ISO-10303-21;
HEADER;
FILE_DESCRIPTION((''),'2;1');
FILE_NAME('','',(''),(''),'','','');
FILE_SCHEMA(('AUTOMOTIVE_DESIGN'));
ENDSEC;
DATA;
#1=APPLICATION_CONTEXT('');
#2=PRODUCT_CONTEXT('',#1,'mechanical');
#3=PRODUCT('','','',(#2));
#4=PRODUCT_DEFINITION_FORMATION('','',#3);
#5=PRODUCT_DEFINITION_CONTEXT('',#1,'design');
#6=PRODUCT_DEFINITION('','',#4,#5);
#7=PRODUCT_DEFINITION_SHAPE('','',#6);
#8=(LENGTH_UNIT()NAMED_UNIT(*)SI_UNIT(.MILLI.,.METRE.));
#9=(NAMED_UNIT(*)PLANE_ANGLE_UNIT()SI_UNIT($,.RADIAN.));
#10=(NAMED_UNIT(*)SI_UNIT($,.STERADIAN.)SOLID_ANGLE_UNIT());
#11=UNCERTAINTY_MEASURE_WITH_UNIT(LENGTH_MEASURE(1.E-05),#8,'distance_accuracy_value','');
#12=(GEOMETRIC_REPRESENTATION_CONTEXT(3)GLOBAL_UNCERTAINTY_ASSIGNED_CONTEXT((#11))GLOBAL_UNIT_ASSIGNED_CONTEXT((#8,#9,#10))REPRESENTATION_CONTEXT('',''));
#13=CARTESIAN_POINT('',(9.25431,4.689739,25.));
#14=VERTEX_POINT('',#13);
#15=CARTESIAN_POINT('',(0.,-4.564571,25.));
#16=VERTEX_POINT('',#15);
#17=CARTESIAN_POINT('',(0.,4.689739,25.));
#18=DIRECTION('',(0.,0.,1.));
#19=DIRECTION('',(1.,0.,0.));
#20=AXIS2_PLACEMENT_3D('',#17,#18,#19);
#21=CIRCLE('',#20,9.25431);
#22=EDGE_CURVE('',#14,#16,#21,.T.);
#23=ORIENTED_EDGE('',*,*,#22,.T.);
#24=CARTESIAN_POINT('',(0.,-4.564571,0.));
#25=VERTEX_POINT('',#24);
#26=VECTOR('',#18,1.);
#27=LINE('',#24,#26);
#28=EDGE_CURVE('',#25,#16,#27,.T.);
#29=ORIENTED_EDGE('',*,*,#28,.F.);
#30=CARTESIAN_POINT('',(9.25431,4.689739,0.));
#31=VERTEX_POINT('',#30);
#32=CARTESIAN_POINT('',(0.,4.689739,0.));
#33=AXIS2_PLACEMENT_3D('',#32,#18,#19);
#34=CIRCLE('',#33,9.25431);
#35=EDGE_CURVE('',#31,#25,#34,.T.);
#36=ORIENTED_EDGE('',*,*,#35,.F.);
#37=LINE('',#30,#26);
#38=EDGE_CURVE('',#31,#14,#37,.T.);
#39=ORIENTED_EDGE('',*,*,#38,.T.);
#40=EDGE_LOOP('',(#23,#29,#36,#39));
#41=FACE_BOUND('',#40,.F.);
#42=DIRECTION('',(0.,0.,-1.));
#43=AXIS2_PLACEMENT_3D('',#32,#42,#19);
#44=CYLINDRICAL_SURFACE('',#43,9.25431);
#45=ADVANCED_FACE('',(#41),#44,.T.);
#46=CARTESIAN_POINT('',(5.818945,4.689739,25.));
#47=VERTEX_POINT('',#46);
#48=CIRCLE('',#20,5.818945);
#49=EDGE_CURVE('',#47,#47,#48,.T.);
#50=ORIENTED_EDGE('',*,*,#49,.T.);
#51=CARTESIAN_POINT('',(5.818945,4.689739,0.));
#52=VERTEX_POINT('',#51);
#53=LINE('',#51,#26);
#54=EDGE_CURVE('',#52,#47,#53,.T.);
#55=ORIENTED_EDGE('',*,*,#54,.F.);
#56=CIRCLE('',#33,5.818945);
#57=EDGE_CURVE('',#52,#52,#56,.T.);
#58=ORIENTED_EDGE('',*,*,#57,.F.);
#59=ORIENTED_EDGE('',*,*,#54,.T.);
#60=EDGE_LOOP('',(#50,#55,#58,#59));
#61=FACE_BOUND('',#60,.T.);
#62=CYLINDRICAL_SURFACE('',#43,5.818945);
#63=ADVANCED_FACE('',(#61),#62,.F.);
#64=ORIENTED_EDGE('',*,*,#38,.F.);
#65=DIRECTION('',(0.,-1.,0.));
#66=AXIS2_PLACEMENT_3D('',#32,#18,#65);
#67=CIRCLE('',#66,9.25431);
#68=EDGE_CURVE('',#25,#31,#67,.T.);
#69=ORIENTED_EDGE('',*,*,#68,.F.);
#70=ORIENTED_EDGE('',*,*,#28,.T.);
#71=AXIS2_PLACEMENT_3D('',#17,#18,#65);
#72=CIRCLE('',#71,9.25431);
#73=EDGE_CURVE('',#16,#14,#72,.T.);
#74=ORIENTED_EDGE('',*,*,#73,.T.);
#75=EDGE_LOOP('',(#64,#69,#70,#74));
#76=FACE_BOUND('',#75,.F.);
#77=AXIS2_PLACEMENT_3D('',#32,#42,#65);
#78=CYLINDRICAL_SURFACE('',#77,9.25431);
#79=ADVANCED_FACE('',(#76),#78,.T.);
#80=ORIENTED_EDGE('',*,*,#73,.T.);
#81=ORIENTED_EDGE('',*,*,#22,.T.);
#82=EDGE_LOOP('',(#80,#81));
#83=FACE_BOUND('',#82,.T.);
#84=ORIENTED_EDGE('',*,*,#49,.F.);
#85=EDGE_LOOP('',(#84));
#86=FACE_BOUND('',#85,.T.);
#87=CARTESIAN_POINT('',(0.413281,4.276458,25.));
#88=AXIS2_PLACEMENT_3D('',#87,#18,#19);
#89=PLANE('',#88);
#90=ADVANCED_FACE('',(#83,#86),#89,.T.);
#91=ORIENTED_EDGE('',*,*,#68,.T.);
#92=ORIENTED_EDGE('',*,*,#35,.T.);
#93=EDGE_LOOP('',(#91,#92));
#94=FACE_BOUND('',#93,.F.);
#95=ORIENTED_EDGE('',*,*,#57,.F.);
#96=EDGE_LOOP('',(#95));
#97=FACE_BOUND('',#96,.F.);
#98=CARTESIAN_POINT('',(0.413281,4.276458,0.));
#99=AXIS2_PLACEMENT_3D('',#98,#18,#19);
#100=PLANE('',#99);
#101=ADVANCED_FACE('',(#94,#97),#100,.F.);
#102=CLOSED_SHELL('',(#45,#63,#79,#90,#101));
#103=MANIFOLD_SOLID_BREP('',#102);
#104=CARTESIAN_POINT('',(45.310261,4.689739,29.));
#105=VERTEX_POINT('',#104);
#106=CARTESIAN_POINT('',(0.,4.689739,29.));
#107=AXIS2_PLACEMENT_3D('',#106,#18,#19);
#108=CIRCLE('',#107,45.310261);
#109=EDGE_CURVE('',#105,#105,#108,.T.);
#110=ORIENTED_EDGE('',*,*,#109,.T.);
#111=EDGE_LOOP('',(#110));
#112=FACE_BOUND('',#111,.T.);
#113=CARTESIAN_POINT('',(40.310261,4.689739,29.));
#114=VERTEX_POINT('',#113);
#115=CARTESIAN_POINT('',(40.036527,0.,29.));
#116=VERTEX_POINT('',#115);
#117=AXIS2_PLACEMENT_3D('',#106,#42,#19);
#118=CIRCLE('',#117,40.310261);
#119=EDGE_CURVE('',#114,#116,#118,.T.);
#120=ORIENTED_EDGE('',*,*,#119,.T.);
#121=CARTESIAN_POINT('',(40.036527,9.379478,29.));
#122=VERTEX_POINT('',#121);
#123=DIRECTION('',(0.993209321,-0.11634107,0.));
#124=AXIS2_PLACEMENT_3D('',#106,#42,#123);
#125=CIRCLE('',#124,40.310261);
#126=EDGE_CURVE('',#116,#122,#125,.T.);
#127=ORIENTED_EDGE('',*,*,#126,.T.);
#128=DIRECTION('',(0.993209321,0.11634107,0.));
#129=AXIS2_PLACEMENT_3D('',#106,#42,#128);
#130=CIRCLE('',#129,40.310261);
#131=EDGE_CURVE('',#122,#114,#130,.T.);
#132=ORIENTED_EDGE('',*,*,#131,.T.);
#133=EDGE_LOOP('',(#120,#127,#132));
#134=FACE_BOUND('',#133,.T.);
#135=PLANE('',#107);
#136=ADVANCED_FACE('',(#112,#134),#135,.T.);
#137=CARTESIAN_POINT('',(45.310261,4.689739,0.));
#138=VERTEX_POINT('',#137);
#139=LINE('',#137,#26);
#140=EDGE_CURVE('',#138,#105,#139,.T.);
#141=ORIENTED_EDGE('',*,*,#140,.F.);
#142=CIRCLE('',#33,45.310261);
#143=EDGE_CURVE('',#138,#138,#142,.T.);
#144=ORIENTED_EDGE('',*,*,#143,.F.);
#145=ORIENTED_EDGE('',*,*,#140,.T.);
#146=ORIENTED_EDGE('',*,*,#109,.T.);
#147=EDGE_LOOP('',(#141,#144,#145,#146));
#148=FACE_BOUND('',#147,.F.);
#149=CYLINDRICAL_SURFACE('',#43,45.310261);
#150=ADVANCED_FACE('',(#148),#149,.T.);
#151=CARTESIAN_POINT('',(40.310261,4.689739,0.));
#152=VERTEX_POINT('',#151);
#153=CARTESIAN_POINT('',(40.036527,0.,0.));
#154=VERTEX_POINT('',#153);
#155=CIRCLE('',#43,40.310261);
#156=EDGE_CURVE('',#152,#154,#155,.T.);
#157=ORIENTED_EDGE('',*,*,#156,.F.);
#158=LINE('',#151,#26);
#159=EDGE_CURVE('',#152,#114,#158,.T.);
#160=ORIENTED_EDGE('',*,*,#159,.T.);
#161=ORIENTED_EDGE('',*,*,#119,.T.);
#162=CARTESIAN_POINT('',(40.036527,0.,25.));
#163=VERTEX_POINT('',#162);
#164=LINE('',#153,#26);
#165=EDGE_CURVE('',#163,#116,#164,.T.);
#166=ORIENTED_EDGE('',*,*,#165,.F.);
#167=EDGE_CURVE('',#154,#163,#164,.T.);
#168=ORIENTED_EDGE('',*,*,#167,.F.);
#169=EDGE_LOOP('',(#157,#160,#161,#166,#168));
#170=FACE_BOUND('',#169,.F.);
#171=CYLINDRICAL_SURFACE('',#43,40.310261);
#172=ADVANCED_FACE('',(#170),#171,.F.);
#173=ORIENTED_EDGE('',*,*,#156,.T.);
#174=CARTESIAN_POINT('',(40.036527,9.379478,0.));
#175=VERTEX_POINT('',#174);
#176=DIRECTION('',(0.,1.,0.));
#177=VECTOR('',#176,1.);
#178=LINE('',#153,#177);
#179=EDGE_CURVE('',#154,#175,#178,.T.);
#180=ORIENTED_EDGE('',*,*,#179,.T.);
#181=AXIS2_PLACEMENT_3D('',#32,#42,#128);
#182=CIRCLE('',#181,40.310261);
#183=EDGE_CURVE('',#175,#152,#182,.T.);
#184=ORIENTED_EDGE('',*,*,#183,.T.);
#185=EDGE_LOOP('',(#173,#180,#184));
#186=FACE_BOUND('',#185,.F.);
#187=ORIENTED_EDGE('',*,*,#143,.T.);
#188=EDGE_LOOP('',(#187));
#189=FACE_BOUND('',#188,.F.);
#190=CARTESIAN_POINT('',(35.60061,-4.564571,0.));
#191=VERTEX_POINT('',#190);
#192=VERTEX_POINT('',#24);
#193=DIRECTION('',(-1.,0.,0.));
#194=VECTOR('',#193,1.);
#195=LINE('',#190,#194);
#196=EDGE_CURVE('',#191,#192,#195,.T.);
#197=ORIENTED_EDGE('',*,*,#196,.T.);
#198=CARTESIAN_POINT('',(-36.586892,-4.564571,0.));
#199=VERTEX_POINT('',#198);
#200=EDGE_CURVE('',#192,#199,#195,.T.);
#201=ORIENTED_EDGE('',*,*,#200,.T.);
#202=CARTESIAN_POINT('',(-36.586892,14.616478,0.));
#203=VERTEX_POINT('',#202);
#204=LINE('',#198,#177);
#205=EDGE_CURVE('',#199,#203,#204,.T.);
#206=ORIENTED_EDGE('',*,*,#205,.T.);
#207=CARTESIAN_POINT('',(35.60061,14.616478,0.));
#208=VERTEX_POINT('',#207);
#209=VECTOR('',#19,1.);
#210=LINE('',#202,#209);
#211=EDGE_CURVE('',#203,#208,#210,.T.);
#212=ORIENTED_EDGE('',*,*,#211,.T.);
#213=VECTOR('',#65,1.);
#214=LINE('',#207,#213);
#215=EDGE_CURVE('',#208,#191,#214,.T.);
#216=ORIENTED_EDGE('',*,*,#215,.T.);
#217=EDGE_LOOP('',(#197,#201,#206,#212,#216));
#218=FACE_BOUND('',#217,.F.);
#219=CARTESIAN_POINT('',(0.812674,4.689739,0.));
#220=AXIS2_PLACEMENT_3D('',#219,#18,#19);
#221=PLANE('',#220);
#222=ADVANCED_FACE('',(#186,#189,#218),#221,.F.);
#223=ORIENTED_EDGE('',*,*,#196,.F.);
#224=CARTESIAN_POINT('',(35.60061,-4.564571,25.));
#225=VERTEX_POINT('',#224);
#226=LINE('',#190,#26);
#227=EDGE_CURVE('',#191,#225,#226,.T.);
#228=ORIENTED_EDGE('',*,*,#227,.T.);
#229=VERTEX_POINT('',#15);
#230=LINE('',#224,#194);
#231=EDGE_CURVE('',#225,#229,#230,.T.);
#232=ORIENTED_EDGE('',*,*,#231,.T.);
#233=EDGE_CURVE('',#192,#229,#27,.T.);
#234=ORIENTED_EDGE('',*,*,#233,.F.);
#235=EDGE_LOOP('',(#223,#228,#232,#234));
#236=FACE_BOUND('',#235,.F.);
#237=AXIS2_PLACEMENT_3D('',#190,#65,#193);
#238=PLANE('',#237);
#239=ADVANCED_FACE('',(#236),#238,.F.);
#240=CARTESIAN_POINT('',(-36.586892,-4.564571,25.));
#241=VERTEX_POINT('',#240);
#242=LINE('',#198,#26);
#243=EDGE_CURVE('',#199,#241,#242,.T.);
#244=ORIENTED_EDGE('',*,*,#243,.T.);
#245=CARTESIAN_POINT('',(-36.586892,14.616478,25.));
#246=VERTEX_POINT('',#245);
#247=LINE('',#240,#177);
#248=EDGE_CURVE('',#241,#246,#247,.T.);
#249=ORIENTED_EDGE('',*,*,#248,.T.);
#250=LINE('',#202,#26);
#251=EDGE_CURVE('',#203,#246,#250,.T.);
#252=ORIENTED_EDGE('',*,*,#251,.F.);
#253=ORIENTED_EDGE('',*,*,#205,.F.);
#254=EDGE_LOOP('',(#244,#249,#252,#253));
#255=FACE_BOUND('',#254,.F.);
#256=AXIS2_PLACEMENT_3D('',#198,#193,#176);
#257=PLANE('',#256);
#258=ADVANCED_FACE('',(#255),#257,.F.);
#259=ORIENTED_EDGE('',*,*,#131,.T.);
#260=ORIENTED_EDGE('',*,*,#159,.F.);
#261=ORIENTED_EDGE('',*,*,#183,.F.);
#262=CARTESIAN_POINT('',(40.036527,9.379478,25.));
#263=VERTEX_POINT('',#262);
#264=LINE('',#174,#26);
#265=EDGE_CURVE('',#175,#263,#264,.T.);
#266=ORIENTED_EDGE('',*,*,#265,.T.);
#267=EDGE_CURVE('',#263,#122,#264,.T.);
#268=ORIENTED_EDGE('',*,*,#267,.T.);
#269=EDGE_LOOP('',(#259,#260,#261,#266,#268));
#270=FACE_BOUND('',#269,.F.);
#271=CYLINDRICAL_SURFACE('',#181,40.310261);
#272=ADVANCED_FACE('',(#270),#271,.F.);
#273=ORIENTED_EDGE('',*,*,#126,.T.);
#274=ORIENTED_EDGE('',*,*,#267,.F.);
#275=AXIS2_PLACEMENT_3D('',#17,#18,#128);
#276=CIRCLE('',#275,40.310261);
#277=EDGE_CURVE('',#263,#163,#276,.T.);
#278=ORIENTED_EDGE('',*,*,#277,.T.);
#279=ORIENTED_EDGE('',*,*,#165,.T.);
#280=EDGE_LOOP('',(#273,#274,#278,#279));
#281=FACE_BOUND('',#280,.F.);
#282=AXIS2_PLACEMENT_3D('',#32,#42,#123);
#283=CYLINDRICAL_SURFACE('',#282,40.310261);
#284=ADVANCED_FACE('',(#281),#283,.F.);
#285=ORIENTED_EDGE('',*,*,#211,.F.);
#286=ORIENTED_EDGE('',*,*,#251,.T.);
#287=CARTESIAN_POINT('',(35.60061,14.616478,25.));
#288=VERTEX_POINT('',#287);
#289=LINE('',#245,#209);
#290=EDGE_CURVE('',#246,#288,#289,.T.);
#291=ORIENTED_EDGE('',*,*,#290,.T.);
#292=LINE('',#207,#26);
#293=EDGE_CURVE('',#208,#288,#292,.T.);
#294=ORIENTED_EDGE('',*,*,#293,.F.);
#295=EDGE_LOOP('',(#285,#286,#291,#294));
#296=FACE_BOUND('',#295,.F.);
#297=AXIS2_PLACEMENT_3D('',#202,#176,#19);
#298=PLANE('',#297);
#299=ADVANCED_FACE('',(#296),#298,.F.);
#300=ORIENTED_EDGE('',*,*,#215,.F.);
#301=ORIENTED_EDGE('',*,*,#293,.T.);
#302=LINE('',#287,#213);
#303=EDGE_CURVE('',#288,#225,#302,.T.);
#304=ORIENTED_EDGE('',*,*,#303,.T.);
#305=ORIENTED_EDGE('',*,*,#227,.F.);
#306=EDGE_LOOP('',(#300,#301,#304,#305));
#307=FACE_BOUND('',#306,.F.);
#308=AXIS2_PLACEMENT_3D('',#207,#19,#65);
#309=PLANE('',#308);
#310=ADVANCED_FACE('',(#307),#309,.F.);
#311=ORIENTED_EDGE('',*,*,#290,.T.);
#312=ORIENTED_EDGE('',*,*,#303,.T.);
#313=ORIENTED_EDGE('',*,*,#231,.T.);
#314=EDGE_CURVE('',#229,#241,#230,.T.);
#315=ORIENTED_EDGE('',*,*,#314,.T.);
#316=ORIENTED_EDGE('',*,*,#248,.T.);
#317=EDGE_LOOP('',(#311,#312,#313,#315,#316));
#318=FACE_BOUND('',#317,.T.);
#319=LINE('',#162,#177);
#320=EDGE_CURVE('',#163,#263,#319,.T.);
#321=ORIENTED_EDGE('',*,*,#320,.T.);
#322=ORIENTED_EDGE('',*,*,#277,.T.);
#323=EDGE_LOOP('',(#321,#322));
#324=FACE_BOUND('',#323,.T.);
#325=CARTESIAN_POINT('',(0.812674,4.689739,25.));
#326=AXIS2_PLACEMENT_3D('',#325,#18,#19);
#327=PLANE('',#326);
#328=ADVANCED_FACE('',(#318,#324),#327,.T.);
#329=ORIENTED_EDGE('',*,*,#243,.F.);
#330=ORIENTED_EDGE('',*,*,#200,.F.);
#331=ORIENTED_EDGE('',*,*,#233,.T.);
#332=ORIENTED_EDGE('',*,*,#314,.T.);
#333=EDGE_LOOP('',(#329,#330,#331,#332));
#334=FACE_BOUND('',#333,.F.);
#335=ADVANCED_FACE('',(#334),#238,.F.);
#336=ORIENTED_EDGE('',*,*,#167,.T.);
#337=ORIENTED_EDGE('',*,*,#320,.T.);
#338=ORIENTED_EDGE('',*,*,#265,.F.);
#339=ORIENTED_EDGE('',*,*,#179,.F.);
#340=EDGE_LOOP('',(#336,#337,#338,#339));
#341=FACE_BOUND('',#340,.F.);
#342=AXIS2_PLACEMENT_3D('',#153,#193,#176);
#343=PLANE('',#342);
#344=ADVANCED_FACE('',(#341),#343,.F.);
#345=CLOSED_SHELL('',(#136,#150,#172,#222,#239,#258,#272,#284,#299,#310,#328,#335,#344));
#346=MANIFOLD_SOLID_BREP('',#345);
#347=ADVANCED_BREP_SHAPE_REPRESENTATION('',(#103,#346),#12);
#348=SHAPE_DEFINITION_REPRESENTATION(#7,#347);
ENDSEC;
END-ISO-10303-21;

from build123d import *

# Parameters (mm, degrees)
F0_R     = 45.3102610886
F1_DEPTH = 29
F2_DEPTH = 30
F0_R_2   = 5.8189451516
F3_DEPTH = 25


with BuildPart() as f1:
    # F0 (on Top) → F1 (new body)
    with BuildSketch(Plane.XY):
        with Locations((0, 4.6897389114)):
            Circle(F0_R)
        with BuildLine():
            ThreePointArc((40.0365270468, 0), (-5.2843801511, -35.2726493486), (-39.8794180788, 10.567592493))
            ThreePointArc((-39.8794180788, 10.567592493), (0.5992286077, 44.9955458641), (40.0365270468, 9.3794778229))
            ThreePointArc((40.0365270468, 9.3794778229), (40.2417693905, 7.038599347), (40.3102610886, 4.6897389114))
            ThreePointArc((40.3102610886, 4.6897389114), (40.2417693905, 2.3408784759), (40.0365270468, 0))
        make_face(mode=Mode.SUBTRACT)
    extrude(amount=F1_DEPTH)

    # F0 (on Top) → F2 (cut)
    with BuildSketch(Plane.XY):
        with Locations((0, 4.6897389114)):
            Circle(F0_R)
        with BuildLine():
            ThreePointArc((40.0365270468, 0), (-5.2843801511, -35.2726493486), (-39.8794180788, 10.567592493))
            ThreePointArc((-39.8794180788, 10.567592493), (0.5992286077, 44.9955458641), (40.0365270468, 9.3794778229))
            ThreePointArc((40.0365270468, 9.3794778229), (40.2417693905, 7.038599347), (40.3102610886, 4.6897389114))
            ThreePointArc((40.3102610886, 4.6897389114), (40.2417693905, 2.3408784759), (40.0365270468, 0))
        make_face(mode=Mode.SUBTRACT)
    extrude(amount=-F2_DEPTH, mode=Mode.SUBTRACT)



with BuildPart() as f3:
    # F0 (on Top) → F3 (new body)
    with BuildSketch(Plane.XY):
        with BuildLine():
            ThreePointArc((0, -4.5645707527), (6.5437851187, -1.8540462073), (9.2543096641, 4.6897389114))
            ThreePointArc((9.2543096641, 4.6897389114), (-6.5437851187, 11.2335240302), (0, -4.5645707527))
        make_face()
        with Locations((0, 4.6897389114)):
            Circle(F0_R_2, mode=Mode.SUBTRACT)
    extrude(amount=F3_DEPTH)


with BuildPart() as f1_1:
    add(f1.part)

    add(f3.part)  # F3#2 merges F3
    # F0 (on Top) → F3, piece 2 (join)
    with BuildSketch(Plane.XY):
        with BuildLine():
            ThreePointArc((40.0365270468, 9.3794778229), (0.5992286077, 44.9955458641), (-39.8794180788, 10.567592493))
            ThreePointArc((-39.8794180788, 10.567592493), (-5.2843801511, -35.2726493486), (40.0365270468, 0))
            Line((40.0365270468, 0), (40.0365270468, 9.3794778229))
        make_face()
        Polygon((35.6006100774, -4.5645707527), (0, -4.5645707527), (-36.5868918598, -4.5645707527), (-36.5868918598, 14.6164782345), (35.6006100774, 14.6164782345), align=None, mode=Mode.SUBTRACT)
    extrude(amount=F3_DEPTH)


solid = f1_1.part
